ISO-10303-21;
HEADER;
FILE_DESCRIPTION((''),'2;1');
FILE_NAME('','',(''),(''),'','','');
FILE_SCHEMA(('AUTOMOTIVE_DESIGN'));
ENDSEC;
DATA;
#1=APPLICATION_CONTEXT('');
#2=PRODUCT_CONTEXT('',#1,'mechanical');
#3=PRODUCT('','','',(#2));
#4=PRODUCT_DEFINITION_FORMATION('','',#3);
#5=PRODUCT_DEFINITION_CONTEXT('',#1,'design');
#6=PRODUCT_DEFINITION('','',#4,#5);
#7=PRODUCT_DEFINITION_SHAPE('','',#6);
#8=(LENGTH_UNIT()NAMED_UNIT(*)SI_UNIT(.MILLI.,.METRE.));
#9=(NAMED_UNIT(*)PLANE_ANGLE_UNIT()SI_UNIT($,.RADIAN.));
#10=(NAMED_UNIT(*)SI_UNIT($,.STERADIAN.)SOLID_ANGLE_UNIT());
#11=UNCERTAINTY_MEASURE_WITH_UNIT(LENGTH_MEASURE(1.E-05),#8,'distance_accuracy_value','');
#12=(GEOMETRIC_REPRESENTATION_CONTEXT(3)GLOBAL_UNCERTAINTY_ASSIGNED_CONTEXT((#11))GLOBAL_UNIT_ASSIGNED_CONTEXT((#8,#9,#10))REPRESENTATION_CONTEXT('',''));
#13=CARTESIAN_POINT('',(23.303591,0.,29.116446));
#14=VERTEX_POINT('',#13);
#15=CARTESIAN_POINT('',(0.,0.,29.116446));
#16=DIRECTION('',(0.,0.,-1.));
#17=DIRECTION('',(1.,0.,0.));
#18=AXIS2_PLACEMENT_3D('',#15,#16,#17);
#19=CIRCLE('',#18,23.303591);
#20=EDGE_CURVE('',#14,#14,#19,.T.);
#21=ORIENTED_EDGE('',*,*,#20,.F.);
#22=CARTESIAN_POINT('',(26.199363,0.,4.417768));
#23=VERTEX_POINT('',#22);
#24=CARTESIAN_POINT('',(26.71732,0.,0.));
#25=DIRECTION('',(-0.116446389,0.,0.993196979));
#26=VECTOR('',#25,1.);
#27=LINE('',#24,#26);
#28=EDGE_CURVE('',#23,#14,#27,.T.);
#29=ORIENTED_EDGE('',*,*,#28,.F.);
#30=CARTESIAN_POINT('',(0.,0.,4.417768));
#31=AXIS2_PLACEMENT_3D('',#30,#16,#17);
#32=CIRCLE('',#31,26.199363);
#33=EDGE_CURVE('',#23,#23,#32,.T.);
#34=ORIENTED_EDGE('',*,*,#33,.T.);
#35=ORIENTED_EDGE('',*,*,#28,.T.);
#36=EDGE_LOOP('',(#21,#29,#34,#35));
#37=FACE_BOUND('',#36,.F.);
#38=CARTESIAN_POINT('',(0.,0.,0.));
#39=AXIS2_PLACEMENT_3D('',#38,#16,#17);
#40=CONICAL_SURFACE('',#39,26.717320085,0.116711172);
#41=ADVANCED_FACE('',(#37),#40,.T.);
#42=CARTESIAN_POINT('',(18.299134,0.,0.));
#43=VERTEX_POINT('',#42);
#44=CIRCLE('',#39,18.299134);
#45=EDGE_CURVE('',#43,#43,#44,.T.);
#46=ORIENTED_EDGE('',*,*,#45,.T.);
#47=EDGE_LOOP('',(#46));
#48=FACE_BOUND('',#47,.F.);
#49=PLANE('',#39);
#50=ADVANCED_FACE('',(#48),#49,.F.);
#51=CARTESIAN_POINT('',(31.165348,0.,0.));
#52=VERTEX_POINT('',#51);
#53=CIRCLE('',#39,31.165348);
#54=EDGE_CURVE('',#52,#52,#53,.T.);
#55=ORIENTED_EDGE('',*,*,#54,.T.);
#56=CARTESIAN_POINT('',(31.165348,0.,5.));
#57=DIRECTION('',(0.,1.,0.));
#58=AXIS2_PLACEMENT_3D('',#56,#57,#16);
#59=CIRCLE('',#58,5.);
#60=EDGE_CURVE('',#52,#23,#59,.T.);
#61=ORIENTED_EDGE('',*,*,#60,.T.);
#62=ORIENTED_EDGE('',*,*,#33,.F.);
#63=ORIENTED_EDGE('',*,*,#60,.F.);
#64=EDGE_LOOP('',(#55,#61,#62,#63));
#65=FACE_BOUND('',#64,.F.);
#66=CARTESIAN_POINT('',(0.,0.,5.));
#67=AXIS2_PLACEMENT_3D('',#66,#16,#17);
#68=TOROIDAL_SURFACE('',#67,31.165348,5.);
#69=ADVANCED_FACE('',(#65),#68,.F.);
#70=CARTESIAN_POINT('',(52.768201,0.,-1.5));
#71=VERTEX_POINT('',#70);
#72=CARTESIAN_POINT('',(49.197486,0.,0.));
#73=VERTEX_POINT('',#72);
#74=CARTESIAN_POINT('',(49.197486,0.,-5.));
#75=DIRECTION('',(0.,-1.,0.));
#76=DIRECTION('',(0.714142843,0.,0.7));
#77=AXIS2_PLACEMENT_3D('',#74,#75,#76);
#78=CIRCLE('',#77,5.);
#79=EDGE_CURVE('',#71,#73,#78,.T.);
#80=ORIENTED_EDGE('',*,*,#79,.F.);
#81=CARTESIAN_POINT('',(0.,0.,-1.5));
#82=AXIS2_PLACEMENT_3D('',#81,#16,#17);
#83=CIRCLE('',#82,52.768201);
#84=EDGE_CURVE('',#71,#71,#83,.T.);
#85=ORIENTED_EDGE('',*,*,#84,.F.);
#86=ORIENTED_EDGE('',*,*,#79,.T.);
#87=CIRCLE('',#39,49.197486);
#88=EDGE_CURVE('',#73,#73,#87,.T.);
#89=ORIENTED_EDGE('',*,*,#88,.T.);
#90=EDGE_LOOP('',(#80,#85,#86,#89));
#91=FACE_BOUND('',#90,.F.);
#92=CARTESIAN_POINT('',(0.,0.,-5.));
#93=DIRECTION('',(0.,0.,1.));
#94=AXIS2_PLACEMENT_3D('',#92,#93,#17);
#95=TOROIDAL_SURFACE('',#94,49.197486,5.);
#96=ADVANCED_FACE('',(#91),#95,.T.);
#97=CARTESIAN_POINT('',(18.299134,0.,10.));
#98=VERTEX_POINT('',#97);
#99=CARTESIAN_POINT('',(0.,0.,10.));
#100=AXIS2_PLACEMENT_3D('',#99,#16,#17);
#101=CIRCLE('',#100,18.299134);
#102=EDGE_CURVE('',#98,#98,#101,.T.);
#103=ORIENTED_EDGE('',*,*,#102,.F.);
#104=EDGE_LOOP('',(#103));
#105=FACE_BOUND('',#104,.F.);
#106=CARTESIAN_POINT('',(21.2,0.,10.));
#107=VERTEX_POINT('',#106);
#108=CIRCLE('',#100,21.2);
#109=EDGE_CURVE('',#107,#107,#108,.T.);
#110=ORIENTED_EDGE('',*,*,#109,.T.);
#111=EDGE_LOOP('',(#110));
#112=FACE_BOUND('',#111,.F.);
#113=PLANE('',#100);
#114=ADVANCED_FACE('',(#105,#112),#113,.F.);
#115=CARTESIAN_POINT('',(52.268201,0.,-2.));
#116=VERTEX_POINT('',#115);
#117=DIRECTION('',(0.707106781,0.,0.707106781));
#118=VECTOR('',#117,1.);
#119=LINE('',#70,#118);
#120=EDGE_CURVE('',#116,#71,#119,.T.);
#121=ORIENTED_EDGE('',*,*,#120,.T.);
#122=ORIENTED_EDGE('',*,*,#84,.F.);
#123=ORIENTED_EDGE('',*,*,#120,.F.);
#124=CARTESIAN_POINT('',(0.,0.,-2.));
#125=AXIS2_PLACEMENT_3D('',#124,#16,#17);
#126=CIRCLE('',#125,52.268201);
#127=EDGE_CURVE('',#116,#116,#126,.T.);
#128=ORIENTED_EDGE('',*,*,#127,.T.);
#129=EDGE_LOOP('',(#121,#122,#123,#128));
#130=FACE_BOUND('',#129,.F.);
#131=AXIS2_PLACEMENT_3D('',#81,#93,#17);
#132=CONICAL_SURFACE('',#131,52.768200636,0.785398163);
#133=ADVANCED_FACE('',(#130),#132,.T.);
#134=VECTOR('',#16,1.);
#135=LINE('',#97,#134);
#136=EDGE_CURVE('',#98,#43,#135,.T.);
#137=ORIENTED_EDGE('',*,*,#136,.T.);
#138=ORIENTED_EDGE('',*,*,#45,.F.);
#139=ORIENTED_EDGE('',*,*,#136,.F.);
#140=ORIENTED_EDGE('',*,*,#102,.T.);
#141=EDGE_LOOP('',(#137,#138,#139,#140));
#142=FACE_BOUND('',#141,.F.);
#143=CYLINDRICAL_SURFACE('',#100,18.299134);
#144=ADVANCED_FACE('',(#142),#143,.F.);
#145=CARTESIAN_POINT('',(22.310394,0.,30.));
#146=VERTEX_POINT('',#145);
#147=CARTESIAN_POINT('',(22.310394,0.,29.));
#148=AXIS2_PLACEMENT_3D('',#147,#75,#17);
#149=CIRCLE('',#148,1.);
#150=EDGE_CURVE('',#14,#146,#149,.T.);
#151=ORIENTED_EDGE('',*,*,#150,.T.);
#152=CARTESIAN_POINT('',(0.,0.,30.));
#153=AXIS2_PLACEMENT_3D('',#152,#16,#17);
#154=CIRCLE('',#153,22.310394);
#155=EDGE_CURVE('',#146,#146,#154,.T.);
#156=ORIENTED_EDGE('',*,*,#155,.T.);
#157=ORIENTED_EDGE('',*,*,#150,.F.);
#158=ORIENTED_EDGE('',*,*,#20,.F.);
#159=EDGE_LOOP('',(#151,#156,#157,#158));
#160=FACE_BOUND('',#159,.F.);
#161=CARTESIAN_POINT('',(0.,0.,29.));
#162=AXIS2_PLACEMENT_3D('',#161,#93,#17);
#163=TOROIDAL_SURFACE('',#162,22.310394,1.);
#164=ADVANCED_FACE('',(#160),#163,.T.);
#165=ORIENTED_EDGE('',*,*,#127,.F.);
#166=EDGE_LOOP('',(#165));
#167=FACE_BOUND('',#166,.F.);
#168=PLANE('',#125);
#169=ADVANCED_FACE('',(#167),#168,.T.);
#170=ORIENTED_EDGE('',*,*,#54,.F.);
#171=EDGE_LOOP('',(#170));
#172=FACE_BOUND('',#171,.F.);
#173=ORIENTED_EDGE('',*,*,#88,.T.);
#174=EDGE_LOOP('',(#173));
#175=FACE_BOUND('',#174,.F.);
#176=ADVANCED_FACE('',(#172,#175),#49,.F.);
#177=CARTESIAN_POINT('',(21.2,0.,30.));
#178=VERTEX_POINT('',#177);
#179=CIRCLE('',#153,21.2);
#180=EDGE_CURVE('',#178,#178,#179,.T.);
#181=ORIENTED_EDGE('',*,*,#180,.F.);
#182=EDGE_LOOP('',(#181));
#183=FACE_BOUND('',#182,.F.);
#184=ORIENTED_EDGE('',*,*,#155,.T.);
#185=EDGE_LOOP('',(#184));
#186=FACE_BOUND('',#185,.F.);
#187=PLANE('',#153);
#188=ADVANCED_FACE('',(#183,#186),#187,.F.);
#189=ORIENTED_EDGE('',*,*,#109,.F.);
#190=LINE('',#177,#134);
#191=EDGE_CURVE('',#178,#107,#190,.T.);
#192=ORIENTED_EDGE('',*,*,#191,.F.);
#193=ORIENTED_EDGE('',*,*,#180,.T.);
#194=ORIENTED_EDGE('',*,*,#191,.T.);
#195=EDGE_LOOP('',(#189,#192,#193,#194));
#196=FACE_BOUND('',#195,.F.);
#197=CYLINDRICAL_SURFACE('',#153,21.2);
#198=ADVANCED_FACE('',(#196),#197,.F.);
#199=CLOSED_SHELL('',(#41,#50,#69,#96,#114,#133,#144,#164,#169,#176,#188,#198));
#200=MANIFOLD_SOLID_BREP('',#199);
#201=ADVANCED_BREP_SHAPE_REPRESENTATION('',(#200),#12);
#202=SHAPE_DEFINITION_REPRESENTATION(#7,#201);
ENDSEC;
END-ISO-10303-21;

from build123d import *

# Parameters (mm, degrees)
F2_SIZE = 0.5
F4_R    = 1


# Not quite as in the source:
# - a fillet or chamfer that OpenCascade refuses, or shapes differently, is made with other operations: its cross-section is extruded or revolved along the edge and cut away or added


with BuildPart() as f1:
    # F0 (on Front) → F1 (revolve)
    with BuildSketch(Plane.XZ):
        Polygon((23.2, 30), (21.2, 30), (21.2, 10), (18.2991344482, 10), (18.2991344482, 0), (0, 0), (0, -2), (52.7682006359, -2), (52.7682006359, 0), (26.7173200846, 0), align=None)
    revolve(axis=Axis((0, 0, 5.5142873898), (0, 0, -1)))

    # F2
    f2_edges = [f1.edges().sort_by_distance(p)[0] for p in [
        (-52.768201, 0, -2),
    ]]
    chamfer(f2_edges, length=F2_SIZE)

    # F3: fillet of radius 5 on 2 edges, made by hand

    # F3_s1 → F3_t2 (revolve)
    with BuildSketch(Plane.XZ):
        with BuildLine():
            ThreePointArc((31.1653481678, 0), (27.8420335373, 1.2642832191), (26.1993632745, 4.4177680532))
            Line((26.1993632745, 4.4177680532), (26.1000435766, 4.4061234142))
            Line((26.1000435766, 4.4061234142), (26.6283595229, -0.1))
            Line((26.6283595229, -0.1), (31.1653481678, -0.1))
            Line((31.1653481678, -0.1), (31.1653481678, 0))
        make_face()
    revolve(axis=Axis((0, 0, 0), (0, 0, -1)))

    # F3_s3 → F3_t4 (revolve, cut)
    with BuildSketch(Plane.XZ):
        with BuildLine():
            ThreePointArc((52.7682006359, -1.5), (51.1339780947, -0.3902277714), (49.1974864216, 0))
            Line((49.1974864216, 0), (49.1974864216, 0.1))
            Line((49.1974864216, 0.1), (52.7682006359, 0.1))
            Line((52.7682006359, 0.1), (52.8682006359, 0))
            ThreePointArc((52.8682006359, 0), (52.8682006359, -0.75), (52.8396149202, -1.43))
            Line((52.8396149202, -1.43), (52.7682006359, -1.5))
        make_face()
    revolve(axis=Axis((0, 0, 0), (0, 0, -1)), mode=Mode.SUBTRACT)

    # F4
    f4_edges = [f1.edges().sort_by_distance(p)[0] for p in [
        (-23.2, 0, 30),
    ]]
    fillet(f4_edges, radius=F4_R)


solid = f1.part
